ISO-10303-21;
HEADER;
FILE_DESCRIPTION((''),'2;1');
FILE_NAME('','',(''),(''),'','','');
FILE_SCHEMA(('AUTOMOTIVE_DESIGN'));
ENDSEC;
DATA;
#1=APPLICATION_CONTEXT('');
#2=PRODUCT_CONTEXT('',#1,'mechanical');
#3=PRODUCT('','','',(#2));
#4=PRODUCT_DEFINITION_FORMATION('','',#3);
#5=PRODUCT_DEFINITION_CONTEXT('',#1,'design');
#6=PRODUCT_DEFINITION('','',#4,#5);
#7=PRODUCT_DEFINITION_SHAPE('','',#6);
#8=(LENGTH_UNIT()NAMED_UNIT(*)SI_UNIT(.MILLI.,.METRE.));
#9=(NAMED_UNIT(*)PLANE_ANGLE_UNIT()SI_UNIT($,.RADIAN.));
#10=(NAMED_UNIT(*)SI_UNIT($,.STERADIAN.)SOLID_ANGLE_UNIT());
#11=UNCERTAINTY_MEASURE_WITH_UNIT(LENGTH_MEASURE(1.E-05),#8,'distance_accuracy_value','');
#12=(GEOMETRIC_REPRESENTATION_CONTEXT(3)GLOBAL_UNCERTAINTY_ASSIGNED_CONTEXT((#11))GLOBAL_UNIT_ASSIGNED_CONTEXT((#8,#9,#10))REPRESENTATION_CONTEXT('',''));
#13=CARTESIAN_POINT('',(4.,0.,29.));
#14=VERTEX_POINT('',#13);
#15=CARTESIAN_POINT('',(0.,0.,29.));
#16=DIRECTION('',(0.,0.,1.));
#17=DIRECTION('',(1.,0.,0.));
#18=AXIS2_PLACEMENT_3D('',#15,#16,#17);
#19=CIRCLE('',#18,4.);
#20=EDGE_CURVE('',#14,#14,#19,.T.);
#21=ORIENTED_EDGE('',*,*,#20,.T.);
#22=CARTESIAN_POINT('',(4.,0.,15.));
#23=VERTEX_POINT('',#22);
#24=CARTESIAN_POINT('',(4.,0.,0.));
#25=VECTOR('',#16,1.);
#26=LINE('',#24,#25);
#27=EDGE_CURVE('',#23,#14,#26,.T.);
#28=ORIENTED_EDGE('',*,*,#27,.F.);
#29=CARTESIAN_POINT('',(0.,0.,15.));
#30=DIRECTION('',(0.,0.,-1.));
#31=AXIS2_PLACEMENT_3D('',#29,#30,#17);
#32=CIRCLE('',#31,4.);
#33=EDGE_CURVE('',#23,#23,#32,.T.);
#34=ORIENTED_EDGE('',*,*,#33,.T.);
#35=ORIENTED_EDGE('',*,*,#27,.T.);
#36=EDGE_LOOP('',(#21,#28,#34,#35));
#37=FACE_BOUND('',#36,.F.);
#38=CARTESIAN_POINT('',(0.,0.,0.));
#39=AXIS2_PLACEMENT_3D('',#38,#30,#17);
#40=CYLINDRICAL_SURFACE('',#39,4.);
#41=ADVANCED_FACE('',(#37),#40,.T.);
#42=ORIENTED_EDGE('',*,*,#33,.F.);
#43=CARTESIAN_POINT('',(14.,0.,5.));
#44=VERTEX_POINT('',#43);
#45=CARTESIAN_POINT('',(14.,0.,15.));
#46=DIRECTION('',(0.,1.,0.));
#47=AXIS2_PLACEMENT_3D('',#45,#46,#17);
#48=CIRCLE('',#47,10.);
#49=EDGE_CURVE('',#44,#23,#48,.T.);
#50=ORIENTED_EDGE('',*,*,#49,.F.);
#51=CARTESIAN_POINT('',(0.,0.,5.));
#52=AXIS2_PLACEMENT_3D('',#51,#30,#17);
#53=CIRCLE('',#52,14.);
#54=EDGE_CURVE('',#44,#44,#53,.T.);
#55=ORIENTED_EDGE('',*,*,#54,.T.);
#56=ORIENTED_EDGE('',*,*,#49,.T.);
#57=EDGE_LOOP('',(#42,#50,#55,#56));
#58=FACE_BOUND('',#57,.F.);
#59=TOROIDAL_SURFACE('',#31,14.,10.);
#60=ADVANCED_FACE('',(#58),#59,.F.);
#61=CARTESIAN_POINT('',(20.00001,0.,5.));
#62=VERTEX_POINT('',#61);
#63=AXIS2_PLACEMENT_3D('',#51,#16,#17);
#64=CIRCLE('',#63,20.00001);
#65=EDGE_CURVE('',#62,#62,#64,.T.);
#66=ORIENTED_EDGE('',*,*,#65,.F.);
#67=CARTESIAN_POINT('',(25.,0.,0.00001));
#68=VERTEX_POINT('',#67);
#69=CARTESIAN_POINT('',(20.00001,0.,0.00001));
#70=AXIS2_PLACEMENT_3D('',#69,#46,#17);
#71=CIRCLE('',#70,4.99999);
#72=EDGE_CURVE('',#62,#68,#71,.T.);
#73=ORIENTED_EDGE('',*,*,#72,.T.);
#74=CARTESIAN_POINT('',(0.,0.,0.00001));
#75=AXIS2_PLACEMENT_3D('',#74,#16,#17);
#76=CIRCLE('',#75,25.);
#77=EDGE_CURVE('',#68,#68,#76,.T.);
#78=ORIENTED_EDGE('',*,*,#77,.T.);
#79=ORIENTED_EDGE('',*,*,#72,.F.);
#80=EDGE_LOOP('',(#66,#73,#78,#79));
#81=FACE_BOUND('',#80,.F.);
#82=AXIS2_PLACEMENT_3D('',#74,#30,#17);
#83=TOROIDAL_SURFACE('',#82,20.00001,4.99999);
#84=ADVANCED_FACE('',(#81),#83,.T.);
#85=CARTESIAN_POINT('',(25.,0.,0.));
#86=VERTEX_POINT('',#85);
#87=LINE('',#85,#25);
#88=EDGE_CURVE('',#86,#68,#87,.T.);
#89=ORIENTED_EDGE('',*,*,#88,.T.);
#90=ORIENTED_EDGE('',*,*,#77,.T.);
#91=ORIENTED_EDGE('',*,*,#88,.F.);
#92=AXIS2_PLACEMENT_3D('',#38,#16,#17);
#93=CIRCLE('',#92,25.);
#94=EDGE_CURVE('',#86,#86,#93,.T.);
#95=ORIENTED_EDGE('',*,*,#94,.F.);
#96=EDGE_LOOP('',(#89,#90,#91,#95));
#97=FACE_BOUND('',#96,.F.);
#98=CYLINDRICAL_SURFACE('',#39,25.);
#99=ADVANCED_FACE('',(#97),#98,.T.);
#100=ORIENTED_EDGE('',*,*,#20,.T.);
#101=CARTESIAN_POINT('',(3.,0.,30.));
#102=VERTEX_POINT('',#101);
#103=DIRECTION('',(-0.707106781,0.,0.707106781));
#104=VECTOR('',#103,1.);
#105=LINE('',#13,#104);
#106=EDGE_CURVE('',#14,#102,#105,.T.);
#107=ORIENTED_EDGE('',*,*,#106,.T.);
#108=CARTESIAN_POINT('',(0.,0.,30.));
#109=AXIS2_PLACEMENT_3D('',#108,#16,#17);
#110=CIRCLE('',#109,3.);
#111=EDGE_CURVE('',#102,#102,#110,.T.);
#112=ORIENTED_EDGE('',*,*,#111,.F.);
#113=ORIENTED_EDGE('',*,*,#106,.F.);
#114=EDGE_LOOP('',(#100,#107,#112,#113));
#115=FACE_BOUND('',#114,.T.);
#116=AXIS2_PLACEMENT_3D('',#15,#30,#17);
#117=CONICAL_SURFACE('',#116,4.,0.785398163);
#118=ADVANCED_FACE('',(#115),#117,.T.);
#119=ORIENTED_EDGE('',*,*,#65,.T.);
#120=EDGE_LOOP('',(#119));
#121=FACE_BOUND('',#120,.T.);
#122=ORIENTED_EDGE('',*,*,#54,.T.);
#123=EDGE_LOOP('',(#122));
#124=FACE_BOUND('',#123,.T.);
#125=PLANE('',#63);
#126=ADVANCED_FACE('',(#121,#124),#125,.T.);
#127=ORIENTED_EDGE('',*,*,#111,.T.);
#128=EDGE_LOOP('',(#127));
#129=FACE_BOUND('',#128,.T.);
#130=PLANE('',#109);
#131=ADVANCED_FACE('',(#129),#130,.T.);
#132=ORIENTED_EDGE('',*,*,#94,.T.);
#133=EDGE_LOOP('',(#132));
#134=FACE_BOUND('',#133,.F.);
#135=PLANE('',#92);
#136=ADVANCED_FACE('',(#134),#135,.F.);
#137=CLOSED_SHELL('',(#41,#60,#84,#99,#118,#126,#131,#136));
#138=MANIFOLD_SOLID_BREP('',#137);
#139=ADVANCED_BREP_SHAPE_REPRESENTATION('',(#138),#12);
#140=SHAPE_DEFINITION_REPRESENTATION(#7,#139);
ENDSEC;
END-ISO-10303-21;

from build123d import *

# Parameters (mm, degrees)
F0_R     = 25
F2_DEPTH = 5
F1_R     = 4
F3_DEPTH = 30
F4_R     = 10
F5_R     = 4.99999
F6_SIZE  = 1


# Not quite as in the source:
# - a fillet or chamfer is up to 0.001 mm smaller than in the source, because OpenCascade refuses the exact size


with BuildPart() as f2:
    # F0 (on Top) → F2 (new body)
    with BuildSketch(Plane.XY):
        Circle(F0_R)
    extrude(amount=F2_DEPTH)

    # F1 (on face) → F3 (join)
    with BuildSketch(Plane.XY):
        Circle(F1_R)
    extrude(amount=F3_DEPTH)

    # F4
    f4_edges = [f2.edges().sort_by_distance(p)[0] for p in [
        (-4, 0, 5),
    ]]
    fillet(f4_edges, radius=F4_R)

    # F5 (radius 5 in the source; OpenCascade refuses exactly that, so slightly less here)
    f5_edges = [f2.edges().sort_by_distance(p)[0] for p in [
        (-25, 0, 5),
    ]]
    fillet(f5_edges, radius=F5_R)

    # F6
    f6_edges = [f2.edges().sort_by_distance(p)[0] for p in [
        (-4, 0, 30),
    ]]
    chamfer(f6_edges, length=F6_SIZE)


solid = f2.part
